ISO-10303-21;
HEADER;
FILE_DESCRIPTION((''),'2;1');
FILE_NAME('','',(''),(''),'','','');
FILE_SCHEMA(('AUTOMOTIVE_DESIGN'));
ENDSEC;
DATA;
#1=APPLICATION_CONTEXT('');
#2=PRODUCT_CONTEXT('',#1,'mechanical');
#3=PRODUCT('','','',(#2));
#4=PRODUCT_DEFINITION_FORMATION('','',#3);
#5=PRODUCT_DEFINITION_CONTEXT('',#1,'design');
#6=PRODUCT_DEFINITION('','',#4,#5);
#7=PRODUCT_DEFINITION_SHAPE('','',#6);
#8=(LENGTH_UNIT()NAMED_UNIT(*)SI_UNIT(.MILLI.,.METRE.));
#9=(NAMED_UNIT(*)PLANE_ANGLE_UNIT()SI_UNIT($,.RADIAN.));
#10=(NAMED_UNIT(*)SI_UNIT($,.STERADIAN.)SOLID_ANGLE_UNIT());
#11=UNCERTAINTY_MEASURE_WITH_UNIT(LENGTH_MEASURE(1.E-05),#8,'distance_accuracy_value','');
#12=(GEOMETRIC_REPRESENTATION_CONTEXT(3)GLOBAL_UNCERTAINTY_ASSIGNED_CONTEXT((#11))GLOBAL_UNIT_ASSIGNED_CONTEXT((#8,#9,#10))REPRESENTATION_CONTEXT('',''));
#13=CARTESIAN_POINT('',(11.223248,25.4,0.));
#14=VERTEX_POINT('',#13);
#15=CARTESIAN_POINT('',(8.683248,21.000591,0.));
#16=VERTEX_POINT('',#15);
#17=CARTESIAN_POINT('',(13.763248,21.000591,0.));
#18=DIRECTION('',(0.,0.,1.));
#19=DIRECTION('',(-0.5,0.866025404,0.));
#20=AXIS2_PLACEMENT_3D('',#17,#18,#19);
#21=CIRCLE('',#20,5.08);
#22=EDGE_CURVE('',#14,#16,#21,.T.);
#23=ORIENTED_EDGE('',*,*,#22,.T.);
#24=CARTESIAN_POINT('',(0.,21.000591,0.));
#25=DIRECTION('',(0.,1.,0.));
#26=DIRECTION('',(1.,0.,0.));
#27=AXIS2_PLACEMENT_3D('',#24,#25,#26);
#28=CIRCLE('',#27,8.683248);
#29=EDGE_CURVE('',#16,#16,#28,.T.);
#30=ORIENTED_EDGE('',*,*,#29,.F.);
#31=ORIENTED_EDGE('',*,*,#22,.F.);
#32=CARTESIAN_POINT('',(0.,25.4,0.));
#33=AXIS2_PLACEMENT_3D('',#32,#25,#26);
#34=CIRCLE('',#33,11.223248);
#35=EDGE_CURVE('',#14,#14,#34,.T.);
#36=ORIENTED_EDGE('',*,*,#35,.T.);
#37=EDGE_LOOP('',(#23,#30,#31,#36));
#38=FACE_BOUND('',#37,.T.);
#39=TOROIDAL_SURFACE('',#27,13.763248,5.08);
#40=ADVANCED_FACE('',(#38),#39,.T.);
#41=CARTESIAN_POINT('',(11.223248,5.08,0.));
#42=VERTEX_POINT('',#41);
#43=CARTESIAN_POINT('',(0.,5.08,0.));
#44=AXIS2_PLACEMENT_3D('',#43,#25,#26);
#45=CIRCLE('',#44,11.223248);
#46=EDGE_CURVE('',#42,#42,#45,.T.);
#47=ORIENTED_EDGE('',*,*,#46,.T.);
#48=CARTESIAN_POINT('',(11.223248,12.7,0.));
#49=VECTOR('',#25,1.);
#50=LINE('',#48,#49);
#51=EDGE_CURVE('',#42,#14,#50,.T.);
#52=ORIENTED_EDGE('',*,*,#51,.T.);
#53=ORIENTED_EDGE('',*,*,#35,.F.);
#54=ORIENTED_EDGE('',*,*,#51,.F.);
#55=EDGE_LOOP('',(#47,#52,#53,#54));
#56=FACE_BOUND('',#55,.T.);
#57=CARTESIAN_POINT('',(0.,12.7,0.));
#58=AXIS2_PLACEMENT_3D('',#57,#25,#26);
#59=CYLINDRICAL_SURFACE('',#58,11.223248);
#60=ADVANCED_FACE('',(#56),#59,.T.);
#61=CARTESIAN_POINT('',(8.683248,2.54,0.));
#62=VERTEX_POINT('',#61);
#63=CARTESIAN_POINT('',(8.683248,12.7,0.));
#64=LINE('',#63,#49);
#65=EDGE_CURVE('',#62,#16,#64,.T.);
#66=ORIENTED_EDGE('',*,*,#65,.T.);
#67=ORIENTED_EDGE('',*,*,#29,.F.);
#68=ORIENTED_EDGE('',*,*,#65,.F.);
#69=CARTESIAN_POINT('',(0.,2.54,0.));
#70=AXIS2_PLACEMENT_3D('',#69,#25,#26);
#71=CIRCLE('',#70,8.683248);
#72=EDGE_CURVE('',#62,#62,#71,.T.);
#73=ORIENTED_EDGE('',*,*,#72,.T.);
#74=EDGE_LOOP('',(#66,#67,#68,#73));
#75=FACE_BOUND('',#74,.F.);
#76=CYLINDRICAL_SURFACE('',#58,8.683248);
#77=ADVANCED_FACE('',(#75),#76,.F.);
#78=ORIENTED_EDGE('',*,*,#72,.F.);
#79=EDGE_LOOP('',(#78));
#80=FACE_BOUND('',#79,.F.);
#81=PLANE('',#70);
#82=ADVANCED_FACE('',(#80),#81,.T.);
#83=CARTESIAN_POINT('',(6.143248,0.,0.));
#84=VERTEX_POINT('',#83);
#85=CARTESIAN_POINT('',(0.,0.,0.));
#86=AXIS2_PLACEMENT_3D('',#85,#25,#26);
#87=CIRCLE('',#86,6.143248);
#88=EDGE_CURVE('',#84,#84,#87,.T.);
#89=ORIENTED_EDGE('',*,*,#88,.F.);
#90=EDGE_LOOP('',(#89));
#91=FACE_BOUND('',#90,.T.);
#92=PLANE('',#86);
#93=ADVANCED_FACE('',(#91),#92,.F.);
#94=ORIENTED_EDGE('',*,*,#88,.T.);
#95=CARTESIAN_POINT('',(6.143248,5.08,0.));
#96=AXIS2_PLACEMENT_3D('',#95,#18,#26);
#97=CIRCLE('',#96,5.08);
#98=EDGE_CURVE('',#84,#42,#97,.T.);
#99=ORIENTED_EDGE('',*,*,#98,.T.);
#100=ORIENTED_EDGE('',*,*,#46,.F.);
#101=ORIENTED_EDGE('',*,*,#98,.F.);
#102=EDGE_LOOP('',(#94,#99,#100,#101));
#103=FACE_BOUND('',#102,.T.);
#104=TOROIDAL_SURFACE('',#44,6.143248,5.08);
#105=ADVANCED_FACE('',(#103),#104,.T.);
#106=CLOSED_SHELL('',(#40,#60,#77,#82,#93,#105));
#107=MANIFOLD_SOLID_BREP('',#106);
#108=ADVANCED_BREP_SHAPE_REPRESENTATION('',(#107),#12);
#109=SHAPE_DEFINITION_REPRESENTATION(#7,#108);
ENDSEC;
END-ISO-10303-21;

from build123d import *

# Parameters (mm, degrees)
F0_W = 11.223247965
F0_H = 25.4
F2_T = -2.54
F4_R = 5.08


# Not quite as in the source:
# - a fillet or chamfer that OpenCascade refuses, or shapes differently, is made with other operations: its cross-section is extruded or revolved along the edge and cut away or added


with BuildPart() as f1:
    # F0 (on Top) → F1 (revolve)
    with BuildSketch(Plane.XY):
        with Locations((5.6116239825, 12.7)):
            Rectangle(F0_W, F0_H)
    revolve(axis=Axis((0, 12.7, 0), (0, 1, 0)))

    # F2
    f2_openings = [f1.faces().sort_by_distance(p)[0] for p in [
        (0, 25.4, 0),
    ]]
    offset(amount=F2_T, openings=f2_openings)

    # F3: fillet of radius 5.08 on 1 edges, made by hand

    # F3_s1 → F3_t2 (revolve, cut)
    with BuildSketch(Plane.XY):
        with BuildLine():
            ThreePointArc((11.223247965, 25.4), (9.3638389137, 23.5405909488), (8.683247965, 21.0005909488))
            Line((8.683247965, 21.0005909488), (8.581647965, 21.0005909488))
            Line((8.581647965, 21.0005909488), (8.581647965, 25.4))
            Line((8.581647965, 25.4), (8.683247965, 25.5016))
            ThreePointArc((8.683247965, 25.5016), (9.953247965, 25.5016), (11.172447965, 25.487988181))
            Line((11.172447965, 25.487988181), (11.223247965, 25.4))
        make_face()
    revolve(axis=Axis((0, 25.4, 0), (0, 1, 0)), mode=Mode.SUBTRACT)

    # F4
    f4_edges = [f1.edges().sort_by_distance(p)[0] for p in [
        (-11.223248, 0, 0),
    ]]
    fillet(f4_edges, radius=F4_R)


solid = f1.part
